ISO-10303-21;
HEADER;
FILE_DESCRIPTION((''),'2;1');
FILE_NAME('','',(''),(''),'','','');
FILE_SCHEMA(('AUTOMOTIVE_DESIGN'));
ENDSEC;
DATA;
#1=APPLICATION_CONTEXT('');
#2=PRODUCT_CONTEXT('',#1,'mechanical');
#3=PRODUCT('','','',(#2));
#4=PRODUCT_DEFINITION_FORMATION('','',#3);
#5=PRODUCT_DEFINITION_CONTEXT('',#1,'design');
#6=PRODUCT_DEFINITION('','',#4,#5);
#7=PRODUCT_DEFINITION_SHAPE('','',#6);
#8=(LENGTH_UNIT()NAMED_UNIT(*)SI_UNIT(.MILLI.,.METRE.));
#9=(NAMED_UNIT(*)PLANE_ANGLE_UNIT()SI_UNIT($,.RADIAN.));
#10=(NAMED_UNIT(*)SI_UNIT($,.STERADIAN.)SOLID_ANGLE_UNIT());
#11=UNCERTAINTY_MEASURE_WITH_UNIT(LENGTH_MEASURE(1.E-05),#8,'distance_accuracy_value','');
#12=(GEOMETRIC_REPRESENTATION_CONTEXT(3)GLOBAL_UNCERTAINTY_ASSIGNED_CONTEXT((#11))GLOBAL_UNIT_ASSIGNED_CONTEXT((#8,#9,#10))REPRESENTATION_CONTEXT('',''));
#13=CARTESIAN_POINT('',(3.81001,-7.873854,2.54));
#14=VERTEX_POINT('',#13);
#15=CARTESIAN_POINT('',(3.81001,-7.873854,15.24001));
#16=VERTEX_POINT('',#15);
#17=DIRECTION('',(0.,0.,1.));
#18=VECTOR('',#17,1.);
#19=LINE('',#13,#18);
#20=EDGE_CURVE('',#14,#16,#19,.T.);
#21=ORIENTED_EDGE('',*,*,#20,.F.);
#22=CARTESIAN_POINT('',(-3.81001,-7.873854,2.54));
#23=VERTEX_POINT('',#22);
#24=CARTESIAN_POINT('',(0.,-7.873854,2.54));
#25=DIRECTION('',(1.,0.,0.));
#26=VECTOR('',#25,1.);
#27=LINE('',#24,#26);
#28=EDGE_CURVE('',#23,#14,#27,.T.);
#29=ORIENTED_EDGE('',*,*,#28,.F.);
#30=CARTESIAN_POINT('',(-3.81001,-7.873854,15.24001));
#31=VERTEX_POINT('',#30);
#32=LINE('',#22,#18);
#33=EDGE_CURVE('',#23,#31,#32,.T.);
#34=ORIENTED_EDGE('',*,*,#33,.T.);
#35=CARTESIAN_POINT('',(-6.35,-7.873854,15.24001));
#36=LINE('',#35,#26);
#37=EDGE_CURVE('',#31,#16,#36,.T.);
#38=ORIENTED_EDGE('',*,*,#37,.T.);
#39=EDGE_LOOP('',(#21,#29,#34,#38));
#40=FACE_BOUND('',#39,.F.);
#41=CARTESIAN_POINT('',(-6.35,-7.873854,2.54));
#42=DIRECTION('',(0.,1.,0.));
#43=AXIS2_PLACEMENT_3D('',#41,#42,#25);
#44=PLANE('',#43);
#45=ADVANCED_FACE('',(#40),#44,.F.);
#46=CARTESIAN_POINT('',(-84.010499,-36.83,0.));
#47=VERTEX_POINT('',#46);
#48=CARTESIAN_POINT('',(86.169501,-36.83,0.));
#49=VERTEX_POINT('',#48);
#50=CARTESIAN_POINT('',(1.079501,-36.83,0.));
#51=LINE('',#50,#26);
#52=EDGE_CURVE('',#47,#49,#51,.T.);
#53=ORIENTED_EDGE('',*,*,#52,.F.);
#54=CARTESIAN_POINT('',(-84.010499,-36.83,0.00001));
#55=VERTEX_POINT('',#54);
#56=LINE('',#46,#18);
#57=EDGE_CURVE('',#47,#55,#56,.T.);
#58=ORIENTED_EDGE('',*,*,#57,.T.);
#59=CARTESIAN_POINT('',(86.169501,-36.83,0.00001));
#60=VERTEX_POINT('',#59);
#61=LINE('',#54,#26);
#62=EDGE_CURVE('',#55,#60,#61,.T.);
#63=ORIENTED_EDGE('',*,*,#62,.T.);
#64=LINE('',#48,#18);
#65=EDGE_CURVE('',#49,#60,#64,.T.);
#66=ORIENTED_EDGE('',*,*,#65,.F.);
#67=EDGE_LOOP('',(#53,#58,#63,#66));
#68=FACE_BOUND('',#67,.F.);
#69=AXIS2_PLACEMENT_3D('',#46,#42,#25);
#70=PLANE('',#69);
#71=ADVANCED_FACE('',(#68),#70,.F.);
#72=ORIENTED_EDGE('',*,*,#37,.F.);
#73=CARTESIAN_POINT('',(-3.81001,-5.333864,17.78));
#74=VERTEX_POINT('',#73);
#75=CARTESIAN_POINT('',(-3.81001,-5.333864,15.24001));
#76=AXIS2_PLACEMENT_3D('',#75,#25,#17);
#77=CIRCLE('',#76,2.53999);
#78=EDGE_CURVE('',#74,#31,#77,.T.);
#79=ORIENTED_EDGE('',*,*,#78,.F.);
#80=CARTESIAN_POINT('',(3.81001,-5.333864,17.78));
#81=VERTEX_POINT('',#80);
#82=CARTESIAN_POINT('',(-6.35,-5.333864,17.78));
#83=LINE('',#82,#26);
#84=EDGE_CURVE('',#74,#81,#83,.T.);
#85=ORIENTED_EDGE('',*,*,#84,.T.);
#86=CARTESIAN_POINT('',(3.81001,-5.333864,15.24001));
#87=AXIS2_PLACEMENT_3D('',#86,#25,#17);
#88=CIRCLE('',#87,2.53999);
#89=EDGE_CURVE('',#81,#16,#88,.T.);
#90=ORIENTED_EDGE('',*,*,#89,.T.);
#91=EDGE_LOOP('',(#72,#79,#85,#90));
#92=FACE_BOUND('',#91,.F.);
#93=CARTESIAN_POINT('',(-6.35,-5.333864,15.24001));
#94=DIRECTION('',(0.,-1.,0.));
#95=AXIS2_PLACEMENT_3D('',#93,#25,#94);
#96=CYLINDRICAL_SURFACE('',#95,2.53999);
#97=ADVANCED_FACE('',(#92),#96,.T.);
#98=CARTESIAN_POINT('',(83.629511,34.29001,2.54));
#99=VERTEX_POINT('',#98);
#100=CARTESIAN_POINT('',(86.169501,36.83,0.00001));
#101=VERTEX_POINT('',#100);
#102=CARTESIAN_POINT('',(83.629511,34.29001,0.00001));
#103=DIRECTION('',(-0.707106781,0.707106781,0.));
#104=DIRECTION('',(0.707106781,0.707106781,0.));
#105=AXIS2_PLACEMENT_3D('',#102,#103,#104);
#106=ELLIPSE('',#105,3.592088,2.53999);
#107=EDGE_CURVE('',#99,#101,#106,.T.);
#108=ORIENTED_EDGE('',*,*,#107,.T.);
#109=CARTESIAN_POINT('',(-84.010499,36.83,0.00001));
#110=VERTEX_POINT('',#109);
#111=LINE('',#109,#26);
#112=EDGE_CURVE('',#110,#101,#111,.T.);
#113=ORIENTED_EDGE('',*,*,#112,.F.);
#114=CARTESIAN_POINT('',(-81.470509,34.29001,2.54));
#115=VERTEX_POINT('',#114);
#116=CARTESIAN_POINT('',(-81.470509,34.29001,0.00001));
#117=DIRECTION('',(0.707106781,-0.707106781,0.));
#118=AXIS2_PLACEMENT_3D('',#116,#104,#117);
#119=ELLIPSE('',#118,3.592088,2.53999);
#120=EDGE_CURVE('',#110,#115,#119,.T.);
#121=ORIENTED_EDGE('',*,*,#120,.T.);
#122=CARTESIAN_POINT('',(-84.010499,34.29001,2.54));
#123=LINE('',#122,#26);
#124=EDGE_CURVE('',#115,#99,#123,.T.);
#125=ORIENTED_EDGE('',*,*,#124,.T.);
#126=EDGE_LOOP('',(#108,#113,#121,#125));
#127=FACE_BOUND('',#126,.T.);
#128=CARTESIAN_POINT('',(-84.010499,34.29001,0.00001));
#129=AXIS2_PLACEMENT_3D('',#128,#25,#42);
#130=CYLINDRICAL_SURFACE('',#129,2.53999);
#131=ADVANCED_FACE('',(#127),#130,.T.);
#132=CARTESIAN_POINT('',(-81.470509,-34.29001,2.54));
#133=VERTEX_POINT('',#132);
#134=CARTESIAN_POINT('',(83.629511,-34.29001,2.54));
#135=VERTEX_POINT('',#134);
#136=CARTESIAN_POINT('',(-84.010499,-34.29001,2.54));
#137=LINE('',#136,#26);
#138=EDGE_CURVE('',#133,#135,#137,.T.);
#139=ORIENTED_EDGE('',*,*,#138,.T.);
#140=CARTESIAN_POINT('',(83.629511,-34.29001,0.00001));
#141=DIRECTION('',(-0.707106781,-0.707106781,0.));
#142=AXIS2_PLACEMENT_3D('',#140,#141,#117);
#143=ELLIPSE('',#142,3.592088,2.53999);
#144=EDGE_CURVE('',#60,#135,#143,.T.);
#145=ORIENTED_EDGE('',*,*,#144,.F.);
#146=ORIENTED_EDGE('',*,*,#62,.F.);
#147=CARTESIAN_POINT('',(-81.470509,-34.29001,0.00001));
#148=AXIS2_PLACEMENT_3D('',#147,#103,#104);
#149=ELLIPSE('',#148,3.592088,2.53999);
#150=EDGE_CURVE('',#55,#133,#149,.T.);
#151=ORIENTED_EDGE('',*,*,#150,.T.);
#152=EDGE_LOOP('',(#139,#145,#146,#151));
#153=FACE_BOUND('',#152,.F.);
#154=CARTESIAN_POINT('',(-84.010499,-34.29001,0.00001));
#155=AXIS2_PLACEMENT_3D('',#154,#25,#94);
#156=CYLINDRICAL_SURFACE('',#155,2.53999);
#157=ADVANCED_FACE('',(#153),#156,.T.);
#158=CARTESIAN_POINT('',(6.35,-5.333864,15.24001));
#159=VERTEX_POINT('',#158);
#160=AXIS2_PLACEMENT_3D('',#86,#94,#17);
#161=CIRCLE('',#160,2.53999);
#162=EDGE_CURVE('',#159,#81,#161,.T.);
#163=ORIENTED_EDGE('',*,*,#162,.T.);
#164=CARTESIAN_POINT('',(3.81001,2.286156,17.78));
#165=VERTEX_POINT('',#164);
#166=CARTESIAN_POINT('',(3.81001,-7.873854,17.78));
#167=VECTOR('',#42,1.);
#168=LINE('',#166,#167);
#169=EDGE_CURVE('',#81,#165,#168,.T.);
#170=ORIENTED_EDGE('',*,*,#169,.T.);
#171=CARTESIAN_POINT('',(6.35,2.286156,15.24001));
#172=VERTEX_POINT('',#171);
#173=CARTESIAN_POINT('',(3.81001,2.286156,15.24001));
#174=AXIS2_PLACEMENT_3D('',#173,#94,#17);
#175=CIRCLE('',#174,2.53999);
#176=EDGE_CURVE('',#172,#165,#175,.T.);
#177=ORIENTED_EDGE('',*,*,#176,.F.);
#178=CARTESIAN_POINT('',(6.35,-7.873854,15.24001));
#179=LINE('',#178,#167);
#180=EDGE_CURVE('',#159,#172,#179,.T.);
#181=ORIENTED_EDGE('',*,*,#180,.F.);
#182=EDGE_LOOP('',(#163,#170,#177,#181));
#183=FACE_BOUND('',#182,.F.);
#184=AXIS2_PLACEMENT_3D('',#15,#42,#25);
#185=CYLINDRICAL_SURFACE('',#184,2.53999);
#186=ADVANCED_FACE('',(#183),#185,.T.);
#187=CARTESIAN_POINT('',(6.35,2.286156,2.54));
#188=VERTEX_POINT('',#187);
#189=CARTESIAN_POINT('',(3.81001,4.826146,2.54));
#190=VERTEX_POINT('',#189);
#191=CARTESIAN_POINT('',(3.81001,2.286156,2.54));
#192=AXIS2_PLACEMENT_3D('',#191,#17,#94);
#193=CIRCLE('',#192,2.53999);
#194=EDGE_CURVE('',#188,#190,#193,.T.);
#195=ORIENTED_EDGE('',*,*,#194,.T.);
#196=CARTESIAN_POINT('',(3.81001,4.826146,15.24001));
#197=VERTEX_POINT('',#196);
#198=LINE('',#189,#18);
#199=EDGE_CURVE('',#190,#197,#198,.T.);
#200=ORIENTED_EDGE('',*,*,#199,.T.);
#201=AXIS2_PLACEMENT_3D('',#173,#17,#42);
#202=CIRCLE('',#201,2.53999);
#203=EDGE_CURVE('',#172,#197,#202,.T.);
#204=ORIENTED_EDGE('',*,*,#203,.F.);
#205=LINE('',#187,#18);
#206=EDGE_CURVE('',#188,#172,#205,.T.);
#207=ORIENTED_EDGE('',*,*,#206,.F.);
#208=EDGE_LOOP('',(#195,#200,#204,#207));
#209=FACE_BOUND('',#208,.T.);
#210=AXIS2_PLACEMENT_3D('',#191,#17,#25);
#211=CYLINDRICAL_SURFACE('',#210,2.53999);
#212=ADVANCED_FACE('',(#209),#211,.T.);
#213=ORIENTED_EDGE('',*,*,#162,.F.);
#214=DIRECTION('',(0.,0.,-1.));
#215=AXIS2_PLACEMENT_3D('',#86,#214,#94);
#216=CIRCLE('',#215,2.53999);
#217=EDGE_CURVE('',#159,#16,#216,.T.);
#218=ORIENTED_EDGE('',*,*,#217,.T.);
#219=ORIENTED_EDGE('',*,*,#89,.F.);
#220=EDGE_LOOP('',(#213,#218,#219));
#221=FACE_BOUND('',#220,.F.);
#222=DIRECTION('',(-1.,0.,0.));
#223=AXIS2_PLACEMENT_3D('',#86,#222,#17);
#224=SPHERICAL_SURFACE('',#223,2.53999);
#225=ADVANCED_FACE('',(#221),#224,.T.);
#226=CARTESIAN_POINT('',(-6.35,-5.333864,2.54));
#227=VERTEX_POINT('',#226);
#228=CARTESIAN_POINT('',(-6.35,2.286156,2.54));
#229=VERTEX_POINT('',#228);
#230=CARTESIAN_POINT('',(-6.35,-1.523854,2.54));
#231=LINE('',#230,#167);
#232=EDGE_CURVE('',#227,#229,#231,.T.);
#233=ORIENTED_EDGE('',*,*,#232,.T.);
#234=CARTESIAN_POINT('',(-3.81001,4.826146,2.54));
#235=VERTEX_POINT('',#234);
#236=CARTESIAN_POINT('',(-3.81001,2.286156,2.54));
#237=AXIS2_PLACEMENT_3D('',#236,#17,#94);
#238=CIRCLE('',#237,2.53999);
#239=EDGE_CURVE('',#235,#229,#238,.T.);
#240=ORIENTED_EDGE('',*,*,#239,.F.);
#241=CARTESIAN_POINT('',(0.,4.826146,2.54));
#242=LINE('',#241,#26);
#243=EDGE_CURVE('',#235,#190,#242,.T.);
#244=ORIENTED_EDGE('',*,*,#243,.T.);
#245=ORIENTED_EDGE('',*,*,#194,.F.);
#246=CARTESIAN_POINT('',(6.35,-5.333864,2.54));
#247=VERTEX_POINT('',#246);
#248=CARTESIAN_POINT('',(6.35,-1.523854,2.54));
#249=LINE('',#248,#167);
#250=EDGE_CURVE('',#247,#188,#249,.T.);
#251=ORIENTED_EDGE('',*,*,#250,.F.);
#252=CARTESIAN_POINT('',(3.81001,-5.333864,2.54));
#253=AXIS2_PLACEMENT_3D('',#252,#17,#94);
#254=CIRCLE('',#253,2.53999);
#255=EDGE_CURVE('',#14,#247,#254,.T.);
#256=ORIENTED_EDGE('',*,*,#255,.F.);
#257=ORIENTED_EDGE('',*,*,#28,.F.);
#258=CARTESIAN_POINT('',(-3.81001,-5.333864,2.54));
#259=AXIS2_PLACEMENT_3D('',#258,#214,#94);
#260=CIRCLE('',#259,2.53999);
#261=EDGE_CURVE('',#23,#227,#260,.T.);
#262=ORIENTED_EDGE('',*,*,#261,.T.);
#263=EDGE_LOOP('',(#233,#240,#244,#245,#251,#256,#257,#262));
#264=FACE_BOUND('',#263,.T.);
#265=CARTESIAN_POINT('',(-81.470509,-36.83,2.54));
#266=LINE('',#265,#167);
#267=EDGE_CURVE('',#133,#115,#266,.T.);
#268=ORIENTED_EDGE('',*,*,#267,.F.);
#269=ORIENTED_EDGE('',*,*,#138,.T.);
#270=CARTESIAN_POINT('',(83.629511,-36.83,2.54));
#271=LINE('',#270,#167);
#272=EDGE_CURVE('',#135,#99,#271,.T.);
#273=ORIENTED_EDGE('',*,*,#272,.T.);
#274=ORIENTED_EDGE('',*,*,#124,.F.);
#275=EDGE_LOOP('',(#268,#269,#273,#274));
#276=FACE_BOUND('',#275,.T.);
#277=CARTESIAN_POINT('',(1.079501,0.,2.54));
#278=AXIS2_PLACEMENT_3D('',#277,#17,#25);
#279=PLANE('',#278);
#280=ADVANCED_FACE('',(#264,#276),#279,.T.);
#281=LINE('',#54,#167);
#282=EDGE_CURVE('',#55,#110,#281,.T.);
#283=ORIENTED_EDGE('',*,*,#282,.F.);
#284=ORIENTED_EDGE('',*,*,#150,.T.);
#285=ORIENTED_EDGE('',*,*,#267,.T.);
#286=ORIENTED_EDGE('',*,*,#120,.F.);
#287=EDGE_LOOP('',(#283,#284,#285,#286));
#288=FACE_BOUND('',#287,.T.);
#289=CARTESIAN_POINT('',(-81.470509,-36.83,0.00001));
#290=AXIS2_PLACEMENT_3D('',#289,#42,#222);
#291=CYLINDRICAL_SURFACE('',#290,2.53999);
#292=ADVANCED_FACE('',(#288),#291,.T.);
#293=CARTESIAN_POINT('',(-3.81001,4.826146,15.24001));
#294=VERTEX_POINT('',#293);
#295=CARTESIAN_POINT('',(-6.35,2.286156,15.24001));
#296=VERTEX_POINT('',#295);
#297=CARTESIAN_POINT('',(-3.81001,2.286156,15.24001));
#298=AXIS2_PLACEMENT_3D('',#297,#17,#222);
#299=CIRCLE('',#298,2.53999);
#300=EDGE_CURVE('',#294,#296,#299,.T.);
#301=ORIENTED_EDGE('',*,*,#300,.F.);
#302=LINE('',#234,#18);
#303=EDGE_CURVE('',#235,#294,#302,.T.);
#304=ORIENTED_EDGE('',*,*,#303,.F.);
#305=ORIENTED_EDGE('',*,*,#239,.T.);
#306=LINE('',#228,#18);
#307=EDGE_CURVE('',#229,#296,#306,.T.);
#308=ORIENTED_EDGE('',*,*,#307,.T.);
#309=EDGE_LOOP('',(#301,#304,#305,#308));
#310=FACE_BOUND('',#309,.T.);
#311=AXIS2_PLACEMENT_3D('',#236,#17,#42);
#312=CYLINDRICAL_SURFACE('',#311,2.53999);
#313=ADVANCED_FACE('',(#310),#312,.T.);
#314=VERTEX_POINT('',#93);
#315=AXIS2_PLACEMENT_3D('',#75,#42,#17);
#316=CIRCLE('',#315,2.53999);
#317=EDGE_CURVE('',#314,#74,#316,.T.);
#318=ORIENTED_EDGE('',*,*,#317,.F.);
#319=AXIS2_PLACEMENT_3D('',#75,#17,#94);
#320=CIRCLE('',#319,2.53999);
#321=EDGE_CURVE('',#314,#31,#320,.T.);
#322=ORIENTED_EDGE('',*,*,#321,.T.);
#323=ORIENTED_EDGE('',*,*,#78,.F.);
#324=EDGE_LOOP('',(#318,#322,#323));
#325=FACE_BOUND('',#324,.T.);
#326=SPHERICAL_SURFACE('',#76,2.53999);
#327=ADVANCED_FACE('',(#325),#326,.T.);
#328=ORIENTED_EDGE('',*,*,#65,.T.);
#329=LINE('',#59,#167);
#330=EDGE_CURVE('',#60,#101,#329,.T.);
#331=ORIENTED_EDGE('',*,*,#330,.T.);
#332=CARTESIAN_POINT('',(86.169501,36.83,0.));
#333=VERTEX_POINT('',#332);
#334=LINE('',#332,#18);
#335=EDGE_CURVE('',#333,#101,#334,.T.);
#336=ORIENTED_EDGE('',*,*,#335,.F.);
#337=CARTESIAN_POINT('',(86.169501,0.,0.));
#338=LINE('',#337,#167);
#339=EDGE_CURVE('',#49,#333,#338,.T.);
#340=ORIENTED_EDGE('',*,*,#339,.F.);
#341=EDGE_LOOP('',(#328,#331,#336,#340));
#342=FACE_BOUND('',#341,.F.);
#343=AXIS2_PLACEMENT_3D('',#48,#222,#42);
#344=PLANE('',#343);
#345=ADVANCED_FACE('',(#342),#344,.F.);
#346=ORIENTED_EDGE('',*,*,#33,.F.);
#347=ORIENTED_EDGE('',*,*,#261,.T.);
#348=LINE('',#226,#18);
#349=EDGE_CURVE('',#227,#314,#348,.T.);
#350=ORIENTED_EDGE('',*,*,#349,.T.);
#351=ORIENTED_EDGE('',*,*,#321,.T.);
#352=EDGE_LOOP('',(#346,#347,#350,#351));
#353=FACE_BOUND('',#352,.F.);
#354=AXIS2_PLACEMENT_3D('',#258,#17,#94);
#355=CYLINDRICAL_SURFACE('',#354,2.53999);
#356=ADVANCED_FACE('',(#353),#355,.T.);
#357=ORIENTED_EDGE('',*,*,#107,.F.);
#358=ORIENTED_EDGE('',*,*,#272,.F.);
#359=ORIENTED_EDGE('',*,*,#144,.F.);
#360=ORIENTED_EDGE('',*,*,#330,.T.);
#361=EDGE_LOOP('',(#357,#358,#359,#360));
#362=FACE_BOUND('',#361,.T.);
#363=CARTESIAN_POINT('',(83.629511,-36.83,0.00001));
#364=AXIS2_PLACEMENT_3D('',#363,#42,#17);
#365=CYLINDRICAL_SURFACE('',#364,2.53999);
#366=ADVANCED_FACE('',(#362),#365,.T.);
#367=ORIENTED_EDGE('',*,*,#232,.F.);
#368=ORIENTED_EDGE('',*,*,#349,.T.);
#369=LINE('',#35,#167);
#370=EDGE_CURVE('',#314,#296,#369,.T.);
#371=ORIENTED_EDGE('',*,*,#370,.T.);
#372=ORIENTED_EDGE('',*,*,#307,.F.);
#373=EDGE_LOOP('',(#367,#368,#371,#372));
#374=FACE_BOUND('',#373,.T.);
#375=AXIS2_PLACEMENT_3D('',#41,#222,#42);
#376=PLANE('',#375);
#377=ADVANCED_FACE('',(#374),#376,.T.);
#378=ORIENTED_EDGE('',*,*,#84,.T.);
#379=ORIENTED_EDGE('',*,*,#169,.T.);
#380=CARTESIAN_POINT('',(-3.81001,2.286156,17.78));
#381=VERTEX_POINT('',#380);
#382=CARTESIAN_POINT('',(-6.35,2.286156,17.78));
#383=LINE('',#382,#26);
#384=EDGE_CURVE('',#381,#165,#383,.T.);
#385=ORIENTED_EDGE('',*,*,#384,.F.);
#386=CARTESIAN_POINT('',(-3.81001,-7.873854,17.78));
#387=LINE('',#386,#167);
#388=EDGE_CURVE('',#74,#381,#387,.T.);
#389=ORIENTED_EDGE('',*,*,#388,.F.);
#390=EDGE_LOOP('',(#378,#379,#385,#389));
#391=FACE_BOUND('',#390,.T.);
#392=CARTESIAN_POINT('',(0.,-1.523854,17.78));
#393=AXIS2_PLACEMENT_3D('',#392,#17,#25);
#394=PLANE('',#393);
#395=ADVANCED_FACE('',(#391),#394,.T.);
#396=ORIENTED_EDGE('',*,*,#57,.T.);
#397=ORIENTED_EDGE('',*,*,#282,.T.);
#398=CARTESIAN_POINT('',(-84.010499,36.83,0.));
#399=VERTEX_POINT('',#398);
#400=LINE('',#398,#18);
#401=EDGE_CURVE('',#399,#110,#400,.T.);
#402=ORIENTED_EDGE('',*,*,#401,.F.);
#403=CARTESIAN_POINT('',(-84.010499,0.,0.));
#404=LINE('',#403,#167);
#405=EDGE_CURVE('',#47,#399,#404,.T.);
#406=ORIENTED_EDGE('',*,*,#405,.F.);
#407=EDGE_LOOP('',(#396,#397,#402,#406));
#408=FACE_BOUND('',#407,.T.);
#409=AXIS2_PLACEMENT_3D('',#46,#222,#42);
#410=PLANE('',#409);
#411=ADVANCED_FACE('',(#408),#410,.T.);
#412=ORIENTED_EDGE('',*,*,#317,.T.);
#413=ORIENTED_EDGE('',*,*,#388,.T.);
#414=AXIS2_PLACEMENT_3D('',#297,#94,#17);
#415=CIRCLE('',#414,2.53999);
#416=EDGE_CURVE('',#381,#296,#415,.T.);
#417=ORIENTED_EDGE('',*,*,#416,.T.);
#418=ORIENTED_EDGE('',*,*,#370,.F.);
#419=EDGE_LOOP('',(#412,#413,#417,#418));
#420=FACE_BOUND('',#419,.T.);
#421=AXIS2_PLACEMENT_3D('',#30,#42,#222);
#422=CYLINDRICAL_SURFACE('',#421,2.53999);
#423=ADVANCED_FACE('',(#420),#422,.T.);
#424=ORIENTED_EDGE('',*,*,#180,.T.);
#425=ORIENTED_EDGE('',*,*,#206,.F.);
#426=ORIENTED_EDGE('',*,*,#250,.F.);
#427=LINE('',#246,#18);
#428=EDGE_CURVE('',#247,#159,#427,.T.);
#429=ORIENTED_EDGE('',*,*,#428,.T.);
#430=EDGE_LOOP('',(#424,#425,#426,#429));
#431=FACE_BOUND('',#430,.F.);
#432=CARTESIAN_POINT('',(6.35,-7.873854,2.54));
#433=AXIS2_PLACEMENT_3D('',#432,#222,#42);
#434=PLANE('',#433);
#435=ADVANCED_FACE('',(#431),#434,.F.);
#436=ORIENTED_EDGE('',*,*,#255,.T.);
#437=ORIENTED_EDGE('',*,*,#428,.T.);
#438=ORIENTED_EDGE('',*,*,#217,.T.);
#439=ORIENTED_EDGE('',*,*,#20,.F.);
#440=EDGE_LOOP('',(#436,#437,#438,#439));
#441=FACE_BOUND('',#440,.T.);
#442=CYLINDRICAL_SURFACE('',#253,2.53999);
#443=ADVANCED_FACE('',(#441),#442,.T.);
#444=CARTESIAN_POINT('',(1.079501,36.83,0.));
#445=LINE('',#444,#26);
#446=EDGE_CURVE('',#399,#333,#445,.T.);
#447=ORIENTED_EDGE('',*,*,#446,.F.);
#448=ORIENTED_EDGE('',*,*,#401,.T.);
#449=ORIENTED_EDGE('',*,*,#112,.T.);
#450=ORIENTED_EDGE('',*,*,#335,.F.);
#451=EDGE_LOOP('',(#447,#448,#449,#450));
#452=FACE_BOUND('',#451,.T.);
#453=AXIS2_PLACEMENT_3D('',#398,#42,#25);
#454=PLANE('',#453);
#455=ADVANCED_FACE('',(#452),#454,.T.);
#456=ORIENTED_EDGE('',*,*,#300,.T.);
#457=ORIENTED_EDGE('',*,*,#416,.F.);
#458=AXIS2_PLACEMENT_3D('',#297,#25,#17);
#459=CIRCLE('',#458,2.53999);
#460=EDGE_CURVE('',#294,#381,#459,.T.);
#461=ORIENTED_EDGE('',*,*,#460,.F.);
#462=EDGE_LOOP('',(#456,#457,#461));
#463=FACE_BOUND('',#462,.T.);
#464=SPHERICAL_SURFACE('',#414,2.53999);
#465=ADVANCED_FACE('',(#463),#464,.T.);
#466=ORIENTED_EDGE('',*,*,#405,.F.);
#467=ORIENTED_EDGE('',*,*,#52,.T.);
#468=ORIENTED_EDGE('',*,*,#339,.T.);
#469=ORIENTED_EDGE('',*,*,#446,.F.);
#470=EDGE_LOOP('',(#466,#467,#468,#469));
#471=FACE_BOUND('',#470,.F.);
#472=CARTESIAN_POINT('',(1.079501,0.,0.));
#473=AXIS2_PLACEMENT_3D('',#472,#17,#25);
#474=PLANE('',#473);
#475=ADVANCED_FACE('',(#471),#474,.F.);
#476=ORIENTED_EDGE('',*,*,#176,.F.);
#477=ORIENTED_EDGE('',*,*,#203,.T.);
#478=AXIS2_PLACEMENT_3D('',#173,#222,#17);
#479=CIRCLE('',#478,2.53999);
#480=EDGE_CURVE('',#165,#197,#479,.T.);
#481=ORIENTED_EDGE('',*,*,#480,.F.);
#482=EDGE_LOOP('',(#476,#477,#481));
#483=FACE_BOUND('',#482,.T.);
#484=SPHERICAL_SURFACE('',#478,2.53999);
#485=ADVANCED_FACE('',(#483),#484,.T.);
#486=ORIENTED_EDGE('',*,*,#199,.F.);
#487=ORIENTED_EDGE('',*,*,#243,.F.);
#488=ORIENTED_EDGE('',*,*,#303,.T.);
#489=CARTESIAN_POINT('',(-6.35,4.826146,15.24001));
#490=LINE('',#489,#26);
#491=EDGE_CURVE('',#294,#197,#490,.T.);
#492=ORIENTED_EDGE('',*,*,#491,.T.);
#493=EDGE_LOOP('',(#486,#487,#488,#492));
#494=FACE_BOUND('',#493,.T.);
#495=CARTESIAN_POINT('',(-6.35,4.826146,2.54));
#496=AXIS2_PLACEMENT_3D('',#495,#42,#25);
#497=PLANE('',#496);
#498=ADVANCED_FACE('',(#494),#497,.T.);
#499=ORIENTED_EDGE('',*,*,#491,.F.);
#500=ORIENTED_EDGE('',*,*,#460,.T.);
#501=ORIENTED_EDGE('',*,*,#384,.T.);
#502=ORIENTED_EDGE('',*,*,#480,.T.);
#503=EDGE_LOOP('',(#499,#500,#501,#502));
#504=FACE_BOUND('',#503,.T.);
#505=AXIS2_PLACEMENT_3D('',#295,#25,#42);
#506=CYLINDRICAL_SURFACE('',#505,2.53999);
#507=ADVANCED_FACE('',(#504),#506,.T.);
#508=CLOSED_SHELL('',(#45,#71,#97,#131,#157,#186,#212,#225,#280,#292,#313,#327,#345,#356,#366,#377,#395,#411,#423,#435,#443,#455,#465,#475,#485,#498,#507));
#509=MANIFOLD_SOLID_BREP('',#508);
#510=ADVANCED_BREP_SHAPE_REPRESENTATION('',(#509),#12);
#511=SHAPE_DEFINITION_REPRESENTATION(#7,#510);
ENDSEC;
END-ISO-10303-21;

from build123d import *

# Parameters (mm, degrees)
F0_W     = 170.18
F0_H     = 73.66
F1_DEPTH = 2.54
F2_W     = 12.7
F2_H     = 12.7
F3_DEPTH = 15.24
F4_R     = 2.53999


# Not quite as in the source:
# - a fillet or chamfer is up to 0.001 mm smaller than in the source, because OpenCascade refuses the exact size


with BuildPart() as f1:
    # F0 (on Top) → F1 (new body)
    with BuildSketch(Plane.XY):
        with Locations((1.0795005364, 0)):
            Rectangle(F0_W, F0_H)
    extrude(amount=F1_DEPTH)

    # F2 (on face) → F3 (join)
    with BuildSketch(Plane.XY.offset(2.54)):
        with Locations((0, -1.5238544315)):
            Rectangle(F2_W, F2_H)
    extrude(amount=F3_DEPTH)

    # F4 (radius 2.54 in the source; OpenCascade refuses exactly that, so slightly less here)
    f4_edges = [f1.edges().sort_by_distance(p)[0] for p in [
        (0, -7.873854, 17.78),
        (-6.35, -1.523854, 17.78),
        (0, 4.826146, 17.78),
        (6.35, -1.523854, 17.78),
        (-6.35, -7.873854, 10.16),
        (6.35, -7.873854, 10.16),
        (6.35, 4.826146, 10.16),
        (-6.35, 4.826146, 10.16),
        (1.079501, -36.83, 2.54),
        (86.169501, 0, 2.54),
        (1.079501, 36.83, 2.54),
        (-84.010499, 0, 2.54),
    ]]
    fillet(f4_edges, radius=F4_R)


solid = f1.part
